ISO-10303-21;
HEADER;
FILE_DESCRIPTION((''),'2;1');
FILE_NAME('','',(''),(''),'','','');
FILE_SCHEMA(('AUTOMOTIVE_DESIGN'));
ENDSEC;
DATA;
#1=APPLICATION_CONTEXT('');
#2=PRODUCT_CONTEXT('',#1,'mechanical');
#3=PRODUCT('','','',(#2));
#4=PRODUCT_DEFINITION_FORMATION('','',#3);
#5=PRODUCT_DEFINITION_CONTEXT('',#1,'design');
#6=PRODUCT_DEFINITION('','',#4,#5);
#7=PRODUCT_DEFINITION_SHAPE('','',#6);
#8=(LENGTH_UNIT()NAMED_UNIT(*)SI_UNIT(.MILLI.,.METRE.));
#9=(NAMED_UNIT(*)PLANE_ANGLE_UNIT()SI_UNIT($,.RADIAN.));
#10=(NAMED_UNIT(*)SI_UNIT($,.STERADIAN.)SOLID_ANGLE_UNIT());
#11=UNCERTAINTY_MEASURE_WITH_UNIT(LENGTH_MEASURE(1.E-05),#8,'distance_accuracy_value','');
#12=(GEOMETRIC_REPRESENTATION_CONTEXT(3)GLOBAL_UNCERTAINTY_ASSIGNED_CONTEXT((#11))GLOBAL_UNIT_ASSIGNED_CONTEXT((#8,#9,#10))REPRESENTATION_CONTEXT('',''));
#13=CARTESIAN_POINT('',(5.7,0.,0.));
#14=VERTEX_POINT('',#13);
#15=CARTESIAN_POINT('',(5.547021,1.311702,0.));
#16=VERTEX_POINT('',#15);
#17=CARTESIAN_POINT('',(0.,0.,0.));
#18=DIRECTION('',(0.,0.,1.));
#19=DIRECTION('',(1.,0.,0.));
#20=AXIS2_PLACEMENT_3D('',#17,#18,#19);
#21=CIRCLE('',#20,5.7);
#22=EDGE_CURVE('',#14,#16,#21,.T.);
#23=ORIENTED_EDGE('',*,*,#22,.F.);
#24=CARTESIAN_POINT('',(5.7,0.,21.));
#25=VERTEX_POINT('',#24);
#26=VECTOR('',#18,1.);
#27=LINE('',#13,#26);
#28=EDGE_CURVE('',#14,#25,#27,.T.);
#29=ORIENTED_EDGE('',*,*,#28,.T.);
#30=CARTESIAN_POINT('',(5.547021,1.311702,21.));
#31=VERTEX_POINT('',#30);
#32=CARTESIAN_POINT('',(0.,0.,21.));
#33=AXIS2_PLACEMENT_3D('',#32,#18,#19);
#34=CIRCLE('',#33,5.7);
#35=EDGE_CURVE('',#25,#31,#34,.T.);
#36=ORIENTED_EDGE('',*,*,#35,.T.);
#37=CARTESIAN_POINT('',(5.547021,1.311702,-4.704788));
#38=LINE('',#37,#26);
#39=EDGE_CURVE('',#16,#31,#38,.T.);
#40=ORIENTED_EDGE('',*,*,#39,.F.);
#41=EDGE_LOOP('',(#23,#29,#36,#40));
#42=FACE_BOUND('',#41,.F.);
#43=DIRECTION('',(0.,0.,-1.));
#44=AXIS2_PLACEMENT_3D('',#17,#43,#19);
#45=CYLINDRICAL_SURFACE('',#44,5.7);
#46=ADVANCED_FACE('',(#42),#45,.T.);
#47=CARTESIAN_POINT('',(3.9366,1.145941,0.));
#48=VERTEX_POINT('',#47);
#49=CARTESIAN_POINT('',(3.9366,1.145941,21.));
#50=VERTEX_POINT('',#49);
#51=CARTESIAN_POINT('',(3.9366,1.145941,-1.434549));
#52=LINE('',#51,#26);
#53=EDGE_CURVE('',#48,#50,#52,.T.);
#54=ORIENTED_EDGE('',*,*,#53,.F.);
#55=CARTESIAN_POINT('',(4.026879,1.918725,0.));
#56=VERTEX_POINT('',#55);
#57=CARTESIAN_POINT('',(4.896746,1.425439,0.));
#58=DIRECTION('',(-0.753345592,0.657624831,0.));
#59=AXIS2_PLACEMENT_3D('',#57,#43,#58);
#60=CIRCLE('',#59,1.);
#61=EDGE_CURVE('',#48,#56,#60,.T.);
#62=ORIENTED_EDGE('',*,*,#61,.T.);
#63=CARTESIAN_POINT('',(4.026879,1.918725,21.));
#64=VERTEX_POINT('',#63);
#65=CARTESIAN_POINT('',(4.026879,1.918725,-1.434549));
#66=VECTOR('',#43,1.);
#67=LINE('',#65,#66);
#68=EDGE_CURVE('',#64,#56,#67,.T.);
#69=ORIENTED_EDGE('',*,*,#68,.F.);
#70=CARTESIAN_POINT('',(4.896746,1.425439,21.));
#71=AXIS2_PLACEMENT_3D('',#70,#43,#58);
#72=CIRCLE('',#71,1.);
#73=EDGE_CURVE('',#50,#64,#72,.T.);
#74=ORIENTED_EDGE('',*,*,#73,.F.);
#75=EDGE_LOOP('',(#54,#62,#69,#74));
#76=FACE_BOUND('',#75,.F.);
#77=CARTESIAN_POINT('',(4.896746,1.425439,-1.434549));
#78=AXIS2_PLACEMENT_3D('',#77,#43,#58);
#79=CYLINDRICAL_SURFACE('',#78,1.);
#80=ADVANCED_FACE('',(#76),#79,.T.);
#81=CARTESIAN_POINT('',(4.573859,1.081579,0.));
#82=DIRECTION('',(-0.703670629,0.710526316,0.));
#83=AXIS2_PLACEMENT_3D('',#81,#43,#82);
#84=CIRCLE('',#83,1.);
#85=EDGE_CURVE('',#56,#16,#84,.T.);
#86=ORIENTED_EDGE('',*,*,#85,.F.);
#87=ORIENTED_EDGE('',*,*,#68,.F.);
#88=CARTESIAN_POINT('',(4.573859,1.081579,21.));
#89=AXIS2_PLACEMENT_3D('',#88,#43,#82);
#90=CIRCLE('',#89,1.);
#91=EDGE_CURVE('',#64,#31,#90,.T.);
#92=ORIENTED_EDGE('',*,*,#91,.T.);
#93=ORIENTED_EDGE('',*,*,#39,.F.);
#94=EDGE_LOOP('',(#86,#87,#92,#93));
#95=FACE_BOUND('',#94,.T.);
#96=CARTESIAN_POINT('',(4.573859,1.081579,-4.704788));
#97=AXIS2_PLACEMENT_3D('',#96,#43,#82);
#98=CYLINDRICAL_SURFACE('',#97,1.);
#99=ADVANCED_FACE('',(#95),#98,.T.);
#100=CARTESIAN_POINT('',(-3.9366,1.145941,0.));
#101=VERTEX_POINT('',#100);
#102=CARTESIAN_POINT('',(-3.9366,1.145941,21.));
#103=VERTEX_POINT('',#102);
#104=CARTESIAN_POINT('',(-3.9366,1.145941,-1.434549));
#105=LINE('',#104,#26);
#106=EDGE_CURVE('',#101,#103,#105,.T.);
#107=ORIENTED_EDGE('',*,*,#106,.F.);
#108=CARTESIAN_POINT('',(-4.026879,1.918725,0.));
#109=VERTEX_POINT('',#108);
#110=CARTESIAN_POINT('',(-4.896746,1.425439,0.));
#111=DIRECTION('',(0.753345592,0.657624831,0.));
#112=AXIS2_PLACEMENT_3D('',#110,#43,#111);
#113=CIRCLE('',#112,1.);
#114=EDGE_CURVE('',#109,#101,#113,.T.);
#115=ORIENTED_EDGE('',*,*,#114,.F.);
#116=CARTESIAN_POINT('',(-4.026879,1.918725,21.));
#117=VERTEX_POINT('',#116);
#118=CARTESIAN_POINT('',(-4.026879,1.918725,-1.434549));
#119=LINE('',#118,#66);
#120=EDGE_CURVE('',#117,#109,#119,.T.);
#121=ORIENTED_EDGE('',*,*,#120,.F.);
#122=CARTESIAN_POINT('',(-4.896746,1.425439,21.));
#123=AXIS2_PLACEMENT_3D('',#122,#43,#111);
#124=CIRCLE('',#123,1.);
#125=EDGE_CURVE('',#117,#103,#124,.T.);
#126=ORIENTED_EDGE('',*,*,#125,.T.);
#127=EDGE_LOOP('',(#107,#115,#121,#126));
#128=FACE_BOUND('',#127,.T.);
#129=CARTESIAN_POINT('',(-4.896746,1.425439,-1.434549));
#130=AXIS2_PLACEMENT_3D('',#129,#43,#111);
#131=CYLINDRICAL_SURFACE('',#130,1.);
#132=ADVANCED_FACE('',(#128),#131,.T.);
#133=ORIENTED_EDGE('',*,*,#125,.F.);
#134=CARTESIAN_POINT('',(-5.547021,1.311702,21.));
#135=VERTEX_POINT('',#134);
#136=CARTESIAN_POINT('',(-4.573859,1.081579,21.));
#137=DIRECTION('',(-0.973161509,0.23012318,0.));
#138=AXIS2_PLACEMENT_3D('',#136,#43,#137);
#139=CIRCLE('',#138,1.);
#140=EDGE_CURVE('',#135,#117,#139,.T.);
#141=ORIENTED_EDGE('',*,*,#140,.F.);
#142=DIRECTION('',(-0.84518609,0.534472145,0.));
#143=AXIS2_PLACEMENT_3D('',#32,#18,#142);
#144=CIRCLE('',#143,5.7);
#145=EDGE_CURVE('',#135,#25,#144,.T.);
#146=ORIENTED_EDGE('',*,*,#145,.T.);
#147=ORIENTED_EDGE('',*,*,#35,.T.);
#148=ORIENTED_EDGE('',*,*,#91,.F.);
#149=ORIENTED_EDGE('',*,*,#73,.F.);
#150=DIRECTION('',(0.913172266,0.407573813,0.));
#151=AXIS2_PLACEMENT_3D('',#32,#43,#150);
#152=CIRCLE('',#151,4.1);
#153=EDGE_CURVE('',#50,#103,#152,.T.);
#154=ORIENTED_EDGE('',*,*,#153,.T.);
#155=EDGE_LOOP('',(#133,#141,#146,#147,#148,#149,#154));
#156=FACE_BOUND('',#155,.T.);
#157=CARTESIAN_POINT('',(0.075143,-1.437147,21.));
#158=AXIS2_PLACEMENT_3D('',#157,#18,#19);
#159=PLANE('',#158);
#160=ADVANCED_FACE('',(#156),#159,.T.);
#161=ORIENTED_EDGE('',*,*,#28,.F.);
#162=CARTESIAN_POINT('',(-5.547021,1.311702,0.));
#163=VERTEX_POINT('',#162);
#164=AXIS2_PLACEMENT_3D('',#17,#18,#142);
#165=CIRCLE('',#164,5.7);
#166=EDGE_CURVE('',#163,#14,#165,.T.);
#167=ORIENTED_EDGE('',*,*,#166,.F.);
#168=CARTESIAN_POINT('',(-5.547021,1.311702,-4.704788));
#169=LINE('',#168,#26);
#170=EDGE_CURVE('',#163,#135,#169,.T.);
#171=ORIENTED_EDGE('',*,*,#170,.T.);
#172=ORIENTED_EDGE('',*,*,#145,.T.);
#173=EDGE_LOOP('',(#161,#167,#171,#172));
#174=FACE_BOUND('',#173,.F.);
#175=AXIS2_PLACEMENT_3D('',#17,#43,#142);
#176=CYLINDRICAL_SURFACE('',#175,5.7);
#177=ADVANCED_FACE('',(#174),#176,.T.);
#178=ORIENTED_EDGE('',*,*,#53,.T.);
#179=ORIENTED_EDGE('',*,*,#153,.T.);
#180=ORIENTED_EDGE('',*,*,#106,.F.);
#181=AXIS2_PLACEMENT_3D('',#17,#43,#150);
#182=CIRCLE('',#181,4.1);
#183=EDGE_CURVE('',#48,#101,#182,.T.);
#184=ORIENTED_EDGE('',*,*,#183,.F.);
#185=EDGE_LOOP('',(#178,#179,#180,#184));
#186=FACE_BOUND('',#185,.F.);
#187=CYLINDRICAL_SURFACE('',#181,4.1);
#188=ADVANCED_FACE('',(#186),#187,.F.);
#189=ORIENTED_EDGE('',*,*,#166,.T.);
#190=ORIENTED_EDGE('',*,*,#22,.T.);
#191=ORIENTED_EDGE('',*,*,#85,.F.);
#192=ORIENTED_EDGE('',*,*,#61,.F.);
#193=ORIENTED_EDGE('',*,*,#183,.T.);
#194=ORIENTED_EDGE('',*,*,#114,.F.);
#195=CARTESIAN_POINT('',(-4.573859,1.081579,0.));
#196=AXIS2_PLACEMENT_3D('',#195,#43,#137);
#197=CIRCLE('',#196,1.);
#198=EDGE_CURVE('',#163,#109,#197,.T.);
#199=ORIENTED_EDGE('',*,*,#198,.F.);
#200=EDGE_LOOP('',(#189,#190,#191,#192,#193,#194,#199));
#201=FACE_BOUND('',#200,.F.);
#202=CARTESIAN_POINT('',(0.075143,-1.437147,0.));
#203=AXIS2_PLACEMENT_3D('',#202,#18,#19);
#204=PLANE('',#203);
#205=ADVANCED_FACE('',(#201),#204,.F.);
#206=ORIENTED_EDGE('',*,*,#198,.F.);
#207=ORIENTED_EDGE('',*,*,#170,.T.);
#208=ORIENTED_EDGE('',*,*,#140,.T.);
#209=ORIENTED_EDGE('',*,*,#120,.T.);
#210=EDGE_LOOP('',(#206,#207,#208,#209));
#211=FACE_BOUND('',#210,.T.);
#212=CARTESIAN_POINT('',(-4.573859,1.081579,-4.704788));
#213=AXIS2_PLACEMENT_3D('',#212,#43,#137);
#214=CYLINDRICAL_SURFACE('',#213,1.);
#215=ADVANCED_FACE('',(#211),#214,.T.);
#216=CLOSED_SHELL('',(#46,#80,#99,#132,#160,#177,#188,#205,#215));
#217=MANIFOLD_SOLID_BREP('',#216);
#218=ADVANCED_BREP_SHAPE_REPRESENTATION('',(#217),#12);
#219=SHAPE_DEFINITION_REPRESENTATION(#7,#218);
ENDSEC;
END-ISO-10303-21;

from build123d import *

# Parameters (mm, degrees)
F1_DEPTH    = 21
F2_T1_DEPTH = 23.8690975764
F2_T3_DEPTH = 30.409576176


# Not quite as in the source:
# - a fillet or chamfer that OpenCascade refuses, or shapes differently, is made with other operations: its cross-section is extruded or revolved along the edge and cut away or added


with BuildPart() as f1:
    # F0 (on Top) → F1 (new body)
    with BuildSketch(Plane.XY):
        with BuildLine():
            ThreePointArc((3.7440062904, 1.6710526316), (4.0100140767, 0.8542757779), (4.1, 0))
            ThreePointArc((4.1, 0), (-0.8542757779, -4.0100140767), (-3.7440062904, 1.6710526316))
            ThreePointArc((-3.7440062904, 1.6710526316), (-4.335673559, 2.3159292575), (-4.8175607103, 3.0464912281))
            ThreePointArc((-4.8175607103, 3.0464912281), (-1.5858600114, -5.4749473079), (5.7, 0))
            ThreePointArc((5.7, 0), (5.4749473079, 1.5858600114), (4.8175607103, 3.0464912281))
            ThreePointArc((4.8175607103, 3.0464912281), (4.335673559, 2.3159292575), (3.7440062904, 1.6710526316))
        make_face()
    extrude(amount=F1_DEPTH)

    # F2: fillet of radius 1 on 4 edges, made by hand

    # F2_s2 → F2_t1 (cut)
    with BuildSketch(Plane.XY.offset(-1.4345487882)):
        with BuildLine():
            ThreePointArc((-4.1434007569, 2.0830634278), (-3.9202406694, 1.6409302608), (-3.9366000062, 1.1459408325))
            ThreePointArc((-3.9366000062, 1.1459408325), (-3.8492679656, 1.4117847318), (-3.7440062904, 1.6710526316))
            ThreePointArc((-3.7440062904, 1.6710526316), (-3.9490803621, 1.8718458373), (-4.1434007569, 2.0830634278))
        make_face()
        with BuildLine():
            ThreePointArc((4.1434007569, 2.0830634278), (3.9202406694, 1.6409302608), (3.9366000062, 1.1459408325))
            ThreePointArc((3.9366000062, 1.1459408325), (3.8492679656, 1.4117847318), (3.7440062904, 1.6710526316))
            ThreePointArc((3.7440062904, 1.6710526316), (3.9490803621, 1.8718458373), (4.1434007569, 2.0830634278))
        make_face()
    extrude(amount=F2_T1_DEPTH, mode=Mode.SUBTRACT)

    # F2_s4 → F2_t3 (cut)
    with BuildSketch(Plane.XY.offset(-4.704788088)):
        with BuildLine():
            ThreePointArc((-5.5470205992, 1.3117021277), (-4.849273554, 2.0429045287), (-3.8701884613, 1.7921052632))
            ThreePointArc((-3.8701884613, 1.7921052632), (-4.3889198505, 2.3852779082), (-4.8175607103, 3.0464912281))
            ThreePointArc((-4.8175607103, 3.0464912281), (-5.2543800525, 2.2094094831), (-5.5470205992, 1.3117021277))
        make_face()
        with BuildLine():
            ThreePointArc((3.8701884613, 1.7921052632), (4.849273554, 2.0429045287), (5.5470205992, 1.3117021277))
            ThreePointArc((5.5470205992, 1.3117021277), (5.2543800525, 2.2094094831), (4.8175607103, 3.0464912281))
            ThreePointArc((4.8175607103, 3.0464912281), (4.3889198505, 2.3852779082), (3.8701884613, 1.7921052632))
        make_face()
    extrude(amount=F2_T3_DEPTH, mode=Mode.SUBTRACT)


solid = f1.part
